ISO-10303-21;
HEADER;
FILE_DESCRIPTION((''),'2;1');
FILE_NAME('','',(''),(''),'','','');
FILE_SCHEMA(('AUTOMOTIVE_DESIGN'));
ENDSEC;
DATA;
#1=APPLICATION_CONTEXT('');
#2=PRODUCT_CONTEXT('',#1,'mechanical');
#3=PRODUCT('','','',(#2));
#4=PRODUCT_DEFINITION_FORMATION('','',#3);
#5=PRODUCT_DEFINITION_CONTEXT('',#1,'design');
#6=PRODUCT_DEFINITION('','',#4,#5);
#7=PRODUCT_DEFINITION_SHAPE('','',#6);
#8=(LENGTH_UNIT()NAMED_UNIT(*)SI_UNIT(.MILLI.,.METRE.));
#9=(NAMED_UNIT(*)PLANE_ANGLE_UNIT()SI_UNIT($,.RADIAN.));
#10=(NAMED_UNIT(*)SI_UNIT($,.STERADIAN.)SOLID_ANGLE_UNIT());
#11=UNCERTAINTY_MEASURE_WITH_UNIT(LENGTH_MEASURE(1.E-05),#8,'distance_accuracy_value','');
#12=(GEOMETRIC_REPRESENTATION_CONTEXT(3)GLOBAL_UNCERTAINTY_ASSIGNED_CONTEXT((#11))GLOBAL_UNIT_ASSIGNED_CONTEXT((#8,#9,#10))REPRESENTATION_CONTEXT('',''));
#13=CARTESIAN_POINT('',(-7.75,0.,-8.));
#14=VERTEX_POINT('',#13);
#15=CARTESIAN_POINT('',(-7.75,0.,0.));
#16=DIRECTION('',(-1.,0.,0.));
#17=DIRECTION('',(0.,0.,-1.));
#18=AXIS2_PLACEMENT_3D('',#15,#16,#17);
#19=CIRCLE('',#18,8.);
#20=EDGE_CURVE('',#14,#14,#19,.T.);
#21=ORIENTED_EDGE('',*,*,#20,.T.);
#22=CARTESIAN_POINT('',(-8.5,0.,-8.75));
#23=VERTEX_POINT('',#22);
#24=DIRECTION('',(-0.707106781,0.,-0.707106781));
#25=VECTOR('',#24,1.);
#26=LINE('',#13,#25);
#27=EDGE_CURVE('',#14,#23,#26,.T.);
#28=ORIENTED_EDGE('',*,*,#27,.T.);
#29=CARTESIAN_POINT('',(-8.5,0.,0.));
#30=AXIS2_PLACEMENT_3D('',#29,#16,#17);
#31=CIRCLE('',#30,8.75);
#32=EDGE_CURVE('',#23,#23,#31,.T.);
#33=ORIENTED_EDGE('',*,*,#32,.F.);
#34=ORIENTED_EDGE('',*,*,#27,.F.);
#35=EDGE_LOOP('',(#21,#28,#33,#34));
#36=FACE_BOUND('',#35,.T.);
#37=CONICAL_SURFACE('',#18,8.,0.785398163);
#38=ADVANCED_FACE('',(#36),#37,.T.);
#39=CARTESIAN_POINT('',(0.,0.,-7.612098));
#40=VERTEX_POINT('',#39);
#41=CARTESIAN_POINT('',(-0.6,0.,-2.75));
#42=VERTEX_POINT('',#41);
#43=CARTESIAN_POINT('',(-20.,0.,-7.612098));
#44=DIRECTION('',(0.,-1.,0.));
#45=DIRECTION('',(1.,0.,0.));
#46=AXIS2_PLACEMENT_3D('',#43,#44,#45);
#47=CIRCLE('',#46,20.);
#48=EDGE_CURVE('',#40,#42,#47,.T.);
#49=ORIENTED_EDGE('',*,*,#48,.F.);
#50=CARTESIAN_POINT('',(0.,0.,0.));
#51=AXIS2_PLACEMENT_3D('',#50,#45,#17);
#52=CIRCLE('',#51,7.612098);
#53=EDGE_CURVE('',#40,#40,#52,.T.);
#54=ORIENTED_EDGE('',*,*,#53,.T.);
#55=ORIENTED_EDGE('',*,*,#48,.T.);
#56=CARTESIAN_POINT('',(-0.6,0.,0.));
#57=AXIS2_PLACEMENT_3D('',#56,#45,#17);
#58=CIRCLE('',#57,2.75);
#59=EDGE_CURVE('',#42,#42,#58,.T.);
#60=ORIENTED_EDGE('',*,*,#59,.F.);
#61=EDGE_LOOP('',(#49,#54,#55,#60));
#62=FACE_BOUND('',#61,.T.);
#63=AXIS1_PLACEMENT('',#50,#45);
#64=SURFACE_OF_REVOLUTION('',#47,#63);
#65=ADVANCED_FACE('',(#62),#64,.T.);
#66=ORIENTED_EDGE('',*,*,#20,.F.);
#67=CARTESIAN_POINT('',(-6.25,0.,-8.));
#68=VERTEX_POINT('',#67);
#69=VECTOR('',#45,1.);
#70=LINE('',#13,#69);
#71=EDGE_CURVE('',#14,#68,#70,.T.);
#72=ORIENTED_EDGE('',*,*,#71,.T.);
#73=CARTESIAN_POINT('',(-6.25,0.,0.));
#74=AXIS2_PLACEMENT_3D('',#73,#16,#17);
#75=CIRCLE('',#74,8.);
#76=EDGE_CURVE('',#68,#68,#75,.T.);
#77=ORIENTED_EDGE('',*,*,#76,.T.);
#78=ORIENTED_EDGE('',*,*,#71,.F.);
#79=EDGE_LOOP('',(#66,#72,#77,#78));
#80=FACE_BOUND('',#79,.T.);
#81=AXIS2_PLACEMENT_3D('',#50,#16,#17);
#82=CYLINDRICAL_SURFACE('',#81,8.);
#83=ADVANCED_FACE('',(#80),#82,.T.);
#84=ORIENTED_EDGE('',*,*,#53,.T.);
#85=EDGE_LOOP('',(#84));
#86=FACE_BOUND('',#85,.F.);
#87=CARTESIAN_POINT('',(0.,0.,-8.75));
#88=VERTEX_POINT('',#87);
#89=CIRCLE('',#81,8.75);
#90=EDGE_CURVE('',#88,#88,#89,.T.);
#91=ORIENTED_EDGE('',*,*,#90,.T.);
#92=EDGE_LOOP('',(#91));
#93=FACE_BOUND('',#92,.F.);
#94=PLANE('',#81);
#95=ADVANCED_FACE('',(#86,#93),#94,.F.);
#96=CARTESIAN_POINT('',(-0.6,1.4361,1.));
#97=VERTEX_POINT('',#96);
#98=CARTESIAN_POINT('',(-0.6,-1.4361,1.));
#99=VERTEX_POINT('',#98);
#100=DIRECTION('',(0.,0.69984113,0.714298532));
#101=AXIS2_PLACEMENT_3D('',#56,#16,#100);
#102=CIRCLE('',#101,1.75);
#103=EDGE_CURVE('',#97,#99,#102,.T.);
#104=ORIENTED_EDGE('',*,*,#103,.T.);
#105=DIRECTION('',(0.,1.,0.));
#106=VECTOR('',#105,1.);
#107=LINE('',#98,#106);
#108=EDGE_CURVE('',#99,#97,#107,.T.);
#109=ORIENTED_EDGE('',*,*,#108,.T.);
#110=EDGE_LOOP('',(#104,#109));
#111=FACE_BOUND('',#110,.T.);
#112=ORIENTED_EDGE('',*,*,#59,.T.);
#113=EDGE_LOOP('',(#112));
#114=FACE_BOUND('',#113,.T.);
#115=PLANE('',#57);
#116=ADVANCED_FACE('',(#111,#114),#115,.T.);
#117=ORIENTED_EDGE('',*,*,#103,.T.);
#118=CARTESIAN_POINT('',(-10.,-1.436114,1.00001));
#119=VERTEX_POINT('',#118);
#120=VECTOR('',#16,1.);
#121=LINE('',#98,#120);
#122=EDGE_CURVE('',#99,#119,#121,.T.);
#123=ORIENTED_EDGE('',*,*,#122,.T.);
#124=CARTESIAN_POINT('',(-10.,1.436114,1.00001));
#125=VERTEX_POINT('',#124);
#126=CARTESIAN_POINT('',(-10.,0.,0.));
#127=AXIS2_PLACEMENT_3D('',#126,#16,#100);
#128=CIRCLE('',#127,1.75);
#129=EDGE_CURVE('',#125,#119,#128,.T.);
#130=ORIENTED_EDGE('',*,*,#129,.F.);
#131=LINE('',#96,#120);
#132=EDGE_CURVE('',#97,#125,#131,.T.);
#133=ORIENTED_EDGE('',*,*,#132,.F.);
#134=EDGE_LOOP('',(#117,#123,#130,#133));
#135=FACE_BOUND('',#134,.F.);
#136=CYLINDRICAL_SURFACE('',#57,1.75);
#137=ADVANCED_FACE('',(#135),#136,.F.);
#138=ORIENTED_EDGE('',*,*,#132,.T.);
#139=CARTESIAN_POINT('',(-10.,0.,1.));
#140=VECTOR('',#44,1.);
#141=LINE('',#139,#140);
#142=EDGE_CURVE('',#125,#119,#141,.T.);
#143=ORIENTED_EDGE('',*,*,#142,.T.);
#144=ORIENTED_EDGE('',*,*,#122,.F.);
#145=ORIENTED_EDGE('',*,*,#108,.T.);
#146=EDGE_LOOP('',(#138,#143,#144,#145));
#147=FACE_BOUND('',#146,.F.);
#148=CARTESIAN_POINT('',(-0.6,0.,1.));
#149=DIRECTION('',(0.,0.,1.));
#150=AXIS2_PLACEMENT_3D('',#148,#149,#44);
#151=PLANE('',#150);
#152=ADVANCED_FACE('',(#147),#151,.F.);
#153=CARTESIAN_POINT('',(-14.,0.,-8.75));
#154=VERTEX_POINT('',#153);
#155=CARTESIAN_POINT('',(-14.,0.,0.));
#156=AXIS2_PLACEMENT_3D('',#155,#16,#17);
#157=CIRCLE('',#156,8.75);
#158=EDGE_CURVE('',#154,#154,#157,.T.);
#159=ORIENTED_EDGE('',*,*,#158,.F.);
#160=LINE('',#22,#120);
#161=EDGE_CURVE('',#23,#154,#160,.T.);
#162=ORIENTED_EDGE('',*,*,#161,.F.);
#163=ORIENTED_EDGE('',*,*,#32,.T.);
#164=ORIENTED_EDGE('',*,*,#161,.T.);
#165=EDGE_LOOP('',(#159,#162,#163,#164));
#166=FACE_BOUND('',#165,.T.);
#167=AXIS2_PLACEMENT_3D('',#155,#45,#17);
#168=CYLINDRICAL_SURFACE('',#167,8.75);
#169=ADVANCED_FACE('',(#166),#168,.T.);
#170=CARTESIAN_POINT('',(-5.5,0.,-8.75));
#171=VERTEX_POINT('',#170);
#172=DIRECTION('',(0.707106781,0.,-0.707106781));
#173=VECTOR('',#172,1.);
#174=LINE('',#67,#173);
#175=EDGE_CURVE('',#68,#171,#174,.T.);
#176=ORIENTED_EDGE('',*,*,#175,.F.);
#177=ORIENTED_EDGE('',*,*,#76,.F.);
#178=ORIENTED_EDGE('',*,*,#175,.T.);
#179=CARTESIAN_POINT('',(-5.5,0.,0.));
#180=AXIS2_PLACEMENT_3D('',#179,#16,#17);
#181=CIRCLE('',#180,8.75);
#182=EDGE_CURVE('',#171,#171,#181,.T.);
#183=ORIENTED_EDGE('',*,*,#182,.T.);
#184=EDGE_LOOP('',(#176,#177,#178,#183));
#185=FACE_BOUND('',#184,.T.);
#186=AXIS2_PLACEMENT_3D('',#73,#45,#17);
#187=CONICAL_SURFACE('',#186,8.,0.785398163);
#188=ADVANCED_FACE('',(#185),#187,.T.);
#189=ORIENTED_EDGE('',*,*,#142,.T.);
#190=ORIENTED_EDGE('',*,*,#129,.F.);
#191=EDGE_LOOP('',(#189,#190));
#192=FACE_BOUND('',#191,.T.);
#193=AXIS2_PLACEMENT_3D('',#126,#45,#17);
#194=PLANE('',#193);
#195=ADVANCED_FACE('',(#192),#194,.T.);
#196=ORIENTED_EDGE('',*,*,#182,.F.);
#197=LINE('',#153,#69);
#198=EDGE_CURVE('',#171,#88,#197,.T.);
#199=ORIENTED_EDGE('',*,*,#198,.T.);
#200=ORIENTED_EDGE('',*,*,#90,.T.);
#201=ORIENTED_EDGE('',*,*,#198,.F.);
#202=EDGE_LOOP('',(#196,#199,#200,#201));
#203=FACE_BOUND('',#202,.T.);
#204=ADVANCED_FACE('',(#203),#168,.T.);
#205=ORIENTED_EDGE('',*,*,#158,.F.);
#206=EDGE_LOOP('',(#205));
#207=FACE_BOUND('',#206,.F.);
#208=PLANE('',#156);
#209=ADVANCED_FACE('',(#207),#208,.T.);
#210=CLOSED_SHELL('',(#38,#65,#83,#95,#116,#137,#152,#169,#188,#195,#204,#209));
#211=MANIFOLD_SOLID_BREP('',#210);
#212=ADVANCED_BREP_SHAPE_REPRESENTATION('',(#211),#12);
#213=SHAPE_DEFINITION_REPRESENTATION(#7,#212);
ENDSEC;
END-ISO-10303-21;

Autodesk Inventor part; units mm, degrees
ref_plane "YZ Plane" through (0, 0, 0) normal (1, 0, 0) x (0, 1, 0)
ref_plane "XZ Plane" through (0, 0, 0) normal (0, 1, 0) x (-1, 0, 0)
ref_plane "XY Plane" through (0, 0, 0) normal (0, 0, 1) x (1, 0, 0)
sketch "Sketch1" plane through (0, 0, 0) normal (0, 1, 0) x (-1, 0, 0)
  line L0 (0, 0) -> (14, 0)
  line L1 (14, 0) -> (14, -8.75)
  line L2 (14, -8.75) -> (0, -8.75)
  line L3 (0, -8.75) -> (0, 0)
  line L4 (14, 0) -> (0, 0)
  line L5 (0, 0) -> (0, -8)
  line L6 (0, -8) -> (14, -8)
  line L7 (14, -8) -> (14, 0)
  line L8 (0, -8.75) -> (5.5, -8.75)
  line L9 (14, -8.75) -> (8.5, -8.75)
  line L10 (8.5, -8.75) -> (8.5, -4)
  line L11 (5.5, -8.75) -> (5.5, -4)
  line L12 (5.5, -8) -> (7, -8)
  line L13 (5.5, -8) -> (6.25, -8)
  line L14 (8.5, -8) -> (7, -8)
  line L15 (8.5, -8) -> (7.75, -8)
  line L16 (7.75, -8) -> (8.5, -8.75)
  line L17 (6.25, -8) -> (5.5, -8.75)
  dimension "d0" = 14
  dimension "d1" = 8.75
  dimension "d2" = 8
  dimension "d3" = 5.5
  dimension "d4" = 5.5
revolve "Revolution1" add sketch "Sketch1" angle 360 about axis through (0, 0, 0) along (-1, 0, 0) contours L0 L1 L6 L3 | L6 L11 L2 L3 | L1 L2 L10 L6 | L6 L17 L11 | L10 L16 L6
sketch "Sketch2" plane through (0, 0, 0) normal (1, 0, 0) x (0, 0, -1)
  circle A0 centre (0, 0) radius 1.5
  line L0 (-1.5, 0) -> (-1, 0)
  line L1 (-1, 0) -> (-1, 1.118)
  line L2 (-1, 0) -> (-1, -1.118)
  circle A1 centre (0, 0) radius 2.75
  dimension "d6" = 3
  dimension "d7" = 0.5
  dimension "d8" = 5.5
extrude "Extrusion1" cut sketch "Sketch2" against normal blind 10 contours A0 L2 L1
extrude "Extrusion2" cut sketch "Sketch2" against normal blind 0.6 contours L1 L0 A0 | A0 L0 L2 | A1
fillet "Fillet1" radius 20 1 edges at (0, 0, 2.75)
sketch "Sketch3" plane through (-14, 0, 0) normal (-1, 0, 0) x (0, 0, 1)
  circle A0 centre (0, 0) radius 8.75 projected
  line L0 (0, -8.75) -> (0, -6.75)
  line L1 (0, 8.75) -> (0, 6.75)
  circle A1 centre (0, 0) radius 6.75
  dimension "d14" = 2
  dimension "d15" = 2
extrude "Extrusion3" cut sketch "Sketch3" against normal blind 1 contours A1
fillet "Fillet2" radius 0.5 1 edges at (-14, 0, -6.75)
sketch "Sketch4" plane through (-0.6, 0, 0) normal (1, 0, 0) x (0, 0, -1)
  circle A0 centre (0, 0) radius 2.75 projected
  line L0 (-1, 1.118) -> (-1, -1.118) projected
  arc A1 (-1, -1.118) -> (-1, 1.118) centre (0, 0) ccw projected
  line L1 (1.5, 0) -> (1.6492, 0)
  line L2 (1.5, 0) -> (1.75, 0)
  circle A2 centre (0, 0) radius 1.75
  line L3 (-1, 1.118) -> (-1, -1.118) projected
  line L4 (-1, 0) -> (-1.25, 0)
  line L5 (-1.25, 0) -> (-1.25, 1.2247)
  line L6 (-1.25, 0) -> (-1.25, -1.2247)
  dimension "d19" = 0.25
  dimension "d20" = 0.25
extrude "Extrusion4" cut sketch "Sketch4" against normal blind 9.4 contours L0 L4 L5 A2 L2 L1 A1 | L0 A1 L1 L2 A2 L6 L4
sketch "Sketch5" plane through (-14, 0, 0) normal (-1, 0, 0) x (0, 0, 1)
  circle A0 centre (0, 0) radius 8.75 projected
  circle A1 centre (0, 0) radius 7.25 projected
  circle A2 centre (0, 0) radius 8.75
extrude "Extrusion5" add sketch "Sketch5" against normal blind 1 contours A0 | A1
sketch "Sketch6" plane through (-0.6, 0, 0) normal (1, 0, 0) x (0, 0, -1)
  arc A0 (-1.25, -1.2247) -> (-1.25, 1.2247) centre (0, 0) ccw projected
  line L0 (-1.25, -1.2247) -> (-1.25, 1.2247) projected
  circle A1 centre (0, 0) radius 2.75 projected
  circle A2 centre (0, 0) radius 1.75
  line L1 (-1.25, -1.2247) -> (-1.25, 1.2247) projected
  line L2 (-1.25, 0) -> (-1, 0)
  line L3 (-1, 0) -> (-1, -1.4361)
  arc A3 (-1.25, -1.2247) -> (-1.25, 1.2247) centre (0, 0) ccw projected
  line L4 (-1, 0) -> (-1, 1.4361)
  dimension "d25" = 0.25
extrude "Extrusion6" add sketch "Sketch6" against normal blind 10 contours L0 L2 L3 A0 | L0 A0 L4 L2
properties part number "koło"
